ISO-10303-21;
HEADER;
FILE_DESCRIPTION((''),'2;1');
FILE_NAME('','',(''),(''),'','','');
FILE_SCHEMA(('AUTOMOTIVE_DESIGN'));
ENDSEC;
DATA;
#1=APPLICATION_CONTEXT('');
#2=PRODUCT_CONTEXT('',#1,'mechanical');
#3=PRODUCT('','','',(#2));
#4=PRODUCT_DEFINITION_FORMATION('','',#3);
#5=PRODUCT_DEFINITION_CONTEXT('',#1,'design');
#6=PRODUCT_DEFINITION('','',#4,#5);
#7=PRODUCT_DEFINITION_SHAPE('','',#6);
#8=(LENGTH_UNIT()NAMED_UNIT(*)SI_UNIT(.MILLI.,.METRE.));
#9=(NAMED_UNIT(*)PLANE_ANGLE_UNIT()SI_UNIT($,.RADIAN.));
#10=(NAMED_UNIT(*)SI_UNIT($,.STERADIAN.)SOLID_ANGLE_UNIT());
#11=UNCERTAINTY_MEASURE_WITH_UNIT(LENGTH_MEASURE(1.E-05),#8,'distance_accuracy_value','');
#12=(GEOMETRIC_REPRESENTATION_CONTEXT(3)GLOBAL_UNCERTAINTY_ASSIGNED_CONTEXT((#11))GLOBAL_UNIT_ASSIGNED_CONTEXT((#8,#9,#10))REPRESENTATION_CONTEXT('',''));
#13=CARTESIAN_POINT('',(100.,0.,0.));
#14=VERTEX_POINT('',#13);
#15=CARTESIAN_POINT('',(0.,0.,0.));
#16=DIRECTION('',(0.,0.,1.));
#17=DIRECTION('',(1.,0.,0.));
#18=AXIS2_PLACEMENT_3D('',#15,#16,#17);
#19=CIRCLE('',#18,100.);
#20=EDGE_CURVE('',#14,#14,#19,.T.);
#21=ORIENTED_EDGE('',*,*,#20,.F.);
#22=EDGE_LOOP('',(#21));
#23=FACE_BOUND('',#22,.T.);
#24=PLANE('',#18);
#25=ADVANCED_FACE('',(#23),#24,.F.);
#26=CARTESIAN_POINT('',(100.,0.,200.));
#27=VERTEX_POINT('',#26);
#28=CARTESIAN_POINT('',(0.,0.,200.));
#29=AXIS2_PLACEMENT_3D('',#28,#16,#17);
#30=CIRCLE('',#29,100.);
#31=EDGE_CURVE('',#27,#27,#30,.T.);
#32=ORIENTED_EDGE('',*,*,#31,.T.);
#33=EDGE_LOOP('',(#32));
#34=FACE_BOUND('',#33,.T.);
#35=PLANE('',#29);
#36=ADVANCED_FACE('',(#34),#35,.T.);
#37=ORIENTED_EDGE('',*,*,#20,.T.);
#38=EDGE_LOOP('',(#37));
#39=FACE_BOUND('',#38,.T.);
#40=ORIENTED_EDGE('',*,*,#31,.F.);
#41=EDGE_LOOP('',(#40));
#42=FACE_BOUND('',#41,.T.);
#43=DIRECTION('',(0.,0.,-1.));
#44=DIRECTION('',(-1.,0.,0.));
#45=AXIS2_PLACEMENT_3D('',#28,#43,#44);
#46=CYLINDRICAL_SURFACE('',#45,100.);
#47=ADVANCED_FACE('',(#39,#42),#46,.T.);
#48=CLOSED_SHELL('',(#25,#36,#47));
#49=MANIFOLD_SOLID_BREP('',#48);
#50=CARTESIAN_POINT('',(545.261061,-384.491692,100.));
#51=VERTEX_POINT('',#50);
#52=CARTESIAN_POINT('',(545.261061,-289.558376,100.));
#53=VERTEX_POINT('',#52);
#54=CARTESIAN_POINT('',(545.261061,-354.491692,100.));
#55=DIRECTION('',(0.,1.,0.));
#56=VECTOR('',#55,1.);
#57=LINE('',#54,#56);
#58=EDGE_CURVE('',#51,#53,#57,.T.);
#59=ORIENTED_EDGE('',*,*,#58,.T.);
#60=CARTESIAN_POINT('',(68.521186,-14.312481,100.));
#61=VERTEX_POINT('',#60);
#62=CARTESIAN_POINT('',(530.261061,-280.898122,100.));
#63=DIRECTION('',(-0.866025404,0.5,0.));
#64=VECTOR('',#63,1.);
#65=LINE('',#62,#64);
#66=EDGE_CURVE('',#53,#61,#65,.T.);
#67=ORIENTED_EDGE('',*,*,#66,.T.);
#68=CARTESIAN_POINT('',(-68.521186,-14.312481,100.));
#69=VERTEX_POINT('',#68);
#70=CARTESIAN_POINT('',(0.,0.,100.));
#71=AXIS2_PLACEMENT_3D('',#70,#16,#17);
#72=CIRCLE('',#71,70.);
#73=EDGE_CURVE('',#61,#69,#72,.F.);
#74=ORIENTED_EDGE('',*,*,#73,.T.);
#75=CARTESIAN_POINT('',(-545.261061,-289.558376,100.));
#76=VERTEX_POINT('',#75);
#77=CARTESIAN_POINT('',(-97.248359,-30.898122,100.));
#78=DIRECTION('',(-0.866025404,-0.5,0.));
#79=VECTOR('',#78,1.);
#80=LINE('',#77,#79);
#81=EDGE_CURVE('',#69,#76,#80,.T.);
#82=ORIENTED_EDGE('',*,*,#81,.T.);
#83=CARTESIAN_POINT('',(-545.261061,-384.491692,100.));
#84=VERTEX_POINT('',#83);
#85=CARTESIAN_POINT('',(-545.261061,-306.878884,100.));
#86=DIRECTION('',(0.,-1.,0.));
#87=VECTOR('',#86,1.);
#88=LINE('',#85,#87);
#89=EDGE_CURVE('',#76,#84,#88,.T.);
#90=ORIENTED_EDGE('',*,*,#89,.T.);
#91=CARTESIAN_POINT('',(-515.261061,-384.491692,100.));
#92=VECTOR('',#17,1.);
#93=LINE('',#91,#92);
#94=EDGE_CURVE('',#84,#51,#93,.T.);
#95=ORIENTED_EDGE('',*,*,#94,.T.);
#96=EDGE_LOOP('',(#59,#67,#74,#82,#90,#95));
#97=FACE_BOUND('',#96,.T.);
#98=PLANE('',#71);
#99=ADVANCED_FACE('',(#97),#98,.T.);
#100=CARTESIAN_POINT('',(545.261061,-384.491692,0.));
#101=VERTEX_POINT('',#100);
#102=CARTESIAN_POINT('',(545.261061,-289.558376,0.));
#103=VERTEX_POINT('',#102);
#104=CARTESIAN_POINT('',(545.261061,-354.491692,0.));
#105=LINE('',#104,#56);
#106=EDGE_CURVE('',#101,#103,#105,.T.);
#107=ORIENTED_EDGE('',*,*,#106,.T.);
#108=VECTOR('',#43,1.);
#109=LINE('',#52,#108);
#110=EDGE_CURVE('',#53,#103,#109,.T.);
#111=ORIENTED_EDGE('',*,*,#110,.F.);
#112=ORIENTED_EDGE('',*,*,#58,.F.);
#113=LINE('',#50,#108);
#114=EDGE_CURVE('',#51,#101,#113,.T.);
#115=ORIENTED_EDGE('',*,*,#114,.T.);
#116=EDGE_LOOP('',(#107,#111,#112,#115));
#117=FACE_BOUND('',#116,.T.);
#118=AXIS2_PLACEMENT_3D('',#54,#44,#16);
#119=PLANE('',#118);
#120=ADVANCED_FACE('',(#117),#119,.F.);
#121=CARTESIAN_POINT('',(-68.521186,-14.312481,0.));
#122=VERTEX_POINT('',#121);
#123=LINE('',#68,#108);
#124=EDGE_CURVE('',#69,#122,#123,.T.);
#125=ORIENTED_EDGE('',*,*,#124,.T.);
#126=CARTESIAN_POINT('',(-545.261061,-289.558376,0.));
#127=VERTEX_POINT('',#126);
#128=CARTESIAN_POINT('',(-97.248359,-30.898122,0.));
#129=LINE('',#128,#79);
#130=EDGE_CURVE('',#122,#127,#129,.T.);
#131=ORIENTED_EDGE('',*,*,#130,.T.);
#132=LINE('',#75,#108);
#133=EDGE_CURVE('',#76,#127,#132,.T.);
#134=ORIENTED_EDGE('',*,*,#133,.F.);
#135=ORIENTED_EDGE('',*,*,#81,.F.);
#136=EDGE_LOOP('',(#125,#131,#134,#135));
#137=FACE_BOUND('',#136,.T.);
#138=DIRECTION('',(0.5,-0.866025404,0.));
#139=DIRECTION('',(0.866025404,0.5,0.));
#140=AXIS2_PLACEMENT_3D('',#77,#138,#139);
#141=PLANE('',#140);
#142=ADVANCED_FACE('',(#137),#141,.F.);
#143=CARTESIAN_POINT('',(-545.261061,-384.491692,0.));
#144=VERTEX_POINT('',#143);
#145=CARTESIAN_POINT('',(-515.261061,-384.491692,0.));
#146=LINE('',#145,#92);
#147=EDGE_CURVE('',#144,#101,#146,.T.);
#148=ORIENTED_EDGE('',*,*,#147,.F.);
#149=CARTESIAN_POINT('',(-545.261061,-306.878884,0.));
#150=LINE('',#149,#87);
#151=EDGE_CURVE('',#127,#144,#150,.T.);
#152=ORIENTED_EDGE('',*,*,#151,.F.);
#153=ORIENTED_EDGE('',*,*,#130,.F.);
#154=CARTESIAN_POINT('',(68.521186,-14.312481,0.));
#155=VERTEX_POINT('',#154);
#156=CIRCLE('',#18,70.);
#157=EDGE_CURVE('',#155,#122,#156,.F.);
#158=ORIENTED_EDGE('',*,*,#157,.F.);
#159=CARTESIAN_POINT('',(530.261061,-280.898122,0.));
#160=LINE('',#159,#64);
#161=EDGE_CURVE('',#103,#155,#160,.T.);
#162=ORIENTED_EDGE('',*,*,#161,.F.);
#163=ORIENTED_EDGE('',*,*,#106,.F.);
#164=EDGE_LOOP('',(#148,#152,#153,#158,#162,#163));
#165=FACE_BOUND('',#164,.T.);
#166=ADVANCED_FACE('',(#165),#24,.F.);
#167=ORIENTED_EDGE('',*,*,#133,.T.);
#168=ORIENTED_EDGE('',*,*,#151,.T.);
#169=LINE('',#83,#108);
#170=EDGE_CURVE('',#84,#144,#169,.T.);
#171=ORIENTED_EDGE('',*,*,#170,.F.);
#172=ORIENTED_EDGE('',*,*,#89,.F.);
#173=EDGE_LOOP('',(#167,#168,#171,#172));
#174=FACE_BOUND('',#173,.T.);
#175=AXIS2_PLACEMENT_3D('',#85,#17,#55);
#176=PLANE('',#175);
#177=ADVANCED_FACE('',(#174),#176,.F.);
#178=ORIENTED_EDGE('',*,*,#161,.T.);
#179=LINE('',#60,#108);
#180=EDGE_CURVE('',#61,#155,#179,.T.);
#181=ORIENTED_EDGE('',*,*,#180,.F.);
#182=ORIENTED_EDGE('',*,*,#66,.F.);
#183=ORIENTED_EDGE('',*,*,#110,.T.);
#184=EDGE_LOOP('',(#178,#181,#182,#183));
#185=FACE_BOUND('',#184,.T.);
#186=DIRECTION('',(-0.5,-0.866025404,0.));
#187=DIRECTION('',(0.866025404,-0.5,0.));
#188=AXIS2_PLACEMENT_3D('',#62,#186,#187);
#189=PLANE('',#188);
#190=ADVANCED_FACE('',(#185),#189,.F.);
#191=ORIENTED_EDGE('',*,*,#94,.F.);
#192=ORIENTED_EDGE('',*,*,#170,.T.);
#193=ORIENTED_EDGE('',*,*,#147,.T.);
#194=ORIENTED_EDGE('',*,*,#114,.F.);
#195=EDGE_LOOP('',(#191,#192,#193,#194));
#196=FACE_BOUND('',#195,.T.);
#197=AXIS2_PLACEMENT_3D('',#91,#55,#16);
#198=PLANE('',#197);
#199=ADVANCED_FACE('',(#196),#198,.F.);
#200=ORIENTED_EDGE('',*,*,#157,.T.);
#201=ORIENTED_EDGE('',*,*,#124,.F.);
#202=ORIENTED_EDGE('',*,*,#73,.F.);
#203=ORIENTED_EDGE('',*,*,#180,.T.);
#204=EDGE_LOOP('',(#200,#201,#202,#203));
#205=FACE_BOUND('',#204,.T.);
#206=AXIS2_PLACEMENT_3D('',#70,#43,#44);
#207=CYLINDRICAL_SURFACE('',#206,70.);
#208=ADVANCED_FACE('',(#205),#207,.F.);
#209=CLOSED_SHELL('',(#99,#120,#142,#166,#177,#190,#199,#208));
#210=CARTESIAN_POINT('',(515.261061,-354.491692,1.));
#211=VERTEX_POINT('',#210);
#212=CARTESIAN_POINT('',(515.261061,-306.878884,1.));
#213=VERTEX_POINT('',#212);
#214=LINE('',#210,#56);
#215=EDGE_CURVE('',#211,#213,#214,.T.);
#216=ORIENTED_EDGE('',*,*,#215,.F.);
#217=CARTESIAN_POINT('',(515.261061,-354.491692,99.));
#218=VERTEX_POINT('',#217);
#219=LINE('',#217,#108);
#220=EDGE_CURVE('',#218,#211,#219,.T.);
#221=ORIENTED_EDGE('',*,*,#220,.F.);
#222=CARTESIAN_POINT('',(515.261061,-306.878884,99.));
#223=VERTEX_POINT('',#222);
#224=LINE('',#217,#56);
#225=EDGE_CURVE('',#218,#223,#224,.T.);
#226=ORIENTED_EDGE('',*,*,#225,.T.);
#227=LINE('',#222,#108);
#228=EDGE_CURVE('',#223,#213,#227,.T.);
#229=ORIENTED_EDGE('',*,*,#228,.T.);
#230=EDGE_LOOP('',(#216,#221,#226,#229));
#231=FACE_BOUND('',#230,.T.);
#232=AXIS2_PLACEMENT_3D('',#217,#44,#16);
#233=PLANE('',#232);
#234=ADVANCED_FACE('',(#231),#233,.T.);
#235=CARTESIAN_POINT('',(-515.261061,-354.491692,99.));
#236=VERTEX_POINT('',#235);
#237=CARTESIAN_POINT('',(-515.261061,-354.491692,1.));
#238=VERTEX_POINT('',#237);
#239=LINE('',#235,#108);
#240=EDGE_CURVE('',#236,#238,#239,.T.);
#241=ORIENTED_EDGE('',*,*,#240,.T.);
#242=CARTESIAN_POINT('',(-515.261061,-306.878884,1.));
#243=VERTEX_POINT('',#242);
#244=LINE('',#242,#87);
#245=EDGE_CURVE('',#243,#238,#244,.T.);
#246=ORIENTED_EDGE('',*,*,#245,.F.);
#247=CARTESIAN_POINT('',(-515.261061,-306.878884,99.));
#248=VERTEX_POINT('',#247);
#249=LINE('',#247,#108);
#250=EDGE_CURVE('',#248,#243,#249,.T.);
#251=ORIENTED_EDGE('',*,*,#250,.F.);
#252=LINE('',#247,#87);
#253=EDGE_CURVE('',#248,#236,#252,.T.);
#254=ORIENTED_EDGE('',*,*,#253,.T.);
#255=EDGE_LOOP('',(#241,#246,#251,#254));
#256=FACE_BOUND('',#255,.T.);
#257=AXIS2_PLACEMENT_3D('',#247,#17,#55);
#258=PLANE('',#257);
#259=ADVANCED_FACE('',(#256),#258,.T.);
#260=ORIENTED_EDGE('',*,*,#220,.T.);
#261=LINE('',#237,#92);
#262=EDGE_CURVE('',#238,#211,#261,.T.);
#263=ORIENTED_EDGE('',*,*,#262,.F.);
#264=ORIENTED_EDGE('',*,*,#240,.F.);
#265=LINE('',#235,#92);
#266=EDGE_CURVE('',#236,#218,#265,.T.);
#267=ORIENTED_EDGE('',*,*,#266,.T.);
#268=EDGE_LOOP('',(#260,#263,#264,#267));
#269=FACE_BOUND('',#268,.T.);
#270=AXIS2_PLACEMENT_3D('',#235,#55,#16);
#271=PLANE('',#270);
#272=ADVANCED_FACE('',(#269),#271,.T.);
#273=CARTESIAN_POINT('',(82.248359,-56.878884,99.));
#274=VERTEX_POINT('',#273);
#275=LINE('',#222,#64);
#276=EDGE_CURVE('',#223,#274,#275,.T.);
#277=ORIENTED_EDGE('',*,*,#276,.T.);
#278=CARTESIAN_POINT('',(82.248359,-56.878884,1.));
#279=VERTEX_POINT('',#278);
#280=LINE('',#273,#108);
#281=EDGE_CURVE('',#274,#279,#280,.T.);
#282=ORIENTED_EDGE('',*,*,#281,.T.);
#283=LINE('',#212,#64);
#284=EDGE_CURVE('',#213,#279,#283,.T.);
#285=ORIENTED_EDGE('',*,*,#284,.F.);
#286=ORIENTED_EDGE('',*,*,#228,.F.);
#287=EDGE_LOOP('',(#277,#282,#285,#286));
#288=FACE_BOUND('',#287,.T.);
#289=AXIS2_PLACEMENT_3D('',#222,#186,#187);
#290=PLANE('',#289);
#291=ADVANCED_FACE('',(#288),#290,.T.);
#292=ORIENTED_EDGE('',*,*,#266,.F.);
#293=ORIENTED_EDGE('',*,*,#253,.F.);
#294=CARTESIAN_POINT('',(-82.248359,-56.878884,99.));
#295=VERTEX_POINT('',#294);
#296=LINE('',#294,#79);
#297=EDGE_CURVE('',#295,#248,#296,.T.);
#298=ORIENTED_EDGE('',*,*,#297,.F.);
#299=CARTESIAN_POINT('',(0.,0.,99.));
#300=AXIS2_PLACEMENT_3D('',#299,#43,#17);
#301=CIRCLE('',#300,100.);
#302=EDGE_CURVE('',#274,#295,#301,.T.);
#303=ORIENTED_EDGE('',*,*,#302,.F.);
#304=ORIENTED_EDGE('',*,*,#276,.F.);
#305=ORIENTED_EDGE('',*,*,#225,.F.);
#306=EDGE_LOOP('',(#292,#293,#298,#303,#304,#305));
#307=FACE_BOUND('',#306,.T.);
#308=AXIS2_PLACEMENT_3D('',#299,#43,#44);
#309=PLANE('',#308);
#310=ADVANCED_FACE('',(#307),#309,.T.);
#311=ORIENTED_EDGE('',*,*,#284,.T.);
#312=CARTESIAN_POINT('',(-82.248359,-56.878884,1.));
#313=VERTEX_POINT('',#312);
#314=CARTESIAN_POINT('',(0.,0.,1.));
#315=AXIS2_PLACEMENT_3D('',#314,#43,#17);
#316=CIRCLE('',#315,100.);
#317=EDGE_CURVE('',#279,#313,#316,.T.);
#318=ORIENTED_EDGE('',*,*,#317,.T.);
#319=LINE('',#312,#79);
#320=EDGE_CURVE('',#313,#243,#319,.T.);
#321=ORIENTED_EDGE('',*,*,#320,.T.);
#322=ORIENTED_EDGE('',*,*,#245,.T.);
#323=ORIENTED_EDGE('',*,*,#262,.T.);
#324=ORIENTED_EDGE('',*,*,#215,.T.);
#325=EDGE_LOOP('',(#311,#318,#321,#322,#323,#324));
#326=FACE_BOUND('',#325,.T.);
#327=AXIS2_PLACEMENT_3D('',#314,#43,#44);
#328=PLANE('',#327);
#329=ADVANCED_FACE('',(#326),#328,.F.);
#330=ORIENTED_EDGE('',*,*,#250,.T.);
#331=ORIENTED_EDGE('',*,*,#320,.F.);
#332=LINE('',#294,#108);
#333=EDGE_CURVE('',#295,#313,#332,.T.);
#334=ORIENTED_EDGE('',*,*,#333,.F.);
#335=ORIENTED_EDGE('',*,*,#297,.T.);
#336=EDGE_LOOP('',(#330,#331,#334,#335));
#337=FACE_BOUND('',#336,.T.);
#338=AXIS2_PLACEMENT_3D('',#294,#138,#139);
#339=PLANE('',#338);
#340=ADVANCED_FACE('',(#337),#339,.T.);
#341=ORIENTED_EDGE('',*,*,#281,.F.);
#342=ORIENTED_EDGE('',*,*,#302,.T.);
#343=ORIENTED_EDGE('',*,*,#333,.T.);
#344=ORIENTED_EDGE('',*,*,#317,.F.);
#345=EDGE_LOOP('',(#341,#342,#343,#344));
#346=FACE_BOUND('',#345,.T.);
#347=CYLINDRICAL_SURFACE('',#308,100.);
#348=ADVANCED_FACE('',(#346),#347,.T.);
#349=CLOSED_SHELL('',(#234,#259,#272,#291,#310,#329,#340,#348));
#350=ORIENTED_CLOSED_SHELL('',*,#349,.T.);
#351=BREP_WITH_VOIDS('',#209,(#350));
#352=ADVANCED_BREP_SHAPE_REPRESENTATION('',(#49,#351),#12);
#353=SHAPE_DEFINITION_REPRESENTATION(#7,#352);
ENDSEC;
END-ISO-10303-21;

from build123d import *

# Parameters (mm, degrees)
SKETCH1_R             = 100
BOSS_EXTRUDE1_DEPTH   = 200
EXTRUDE_THIN1_DEPTH   = 100
EXTRUDE_THIN1_2_DEPTH = 1
EXTRUDE_THIN1_START   = 99
EXTRUDE_THIN1_3_DEPTH = 1


# Read off the part's stored shape, not the designer's step: Extrude-Thin1
with BuildPart() as part:
    # Sketch1 → Boss-Extrude1 (new body)
    with BuildSketch(Plane.XY):
        Circle(SKETCH1_R)
    extrude(amount=BOSS_EXTRUDE1_DEPTH)


with BuildPart() as body_2:
    # Extrude-Thin1 outline → Extrude-Thin1 (new body)
    with BuildSketch(Plane.XY):
        with BuildLine():
            Line((545.26106063, -289.558376275), (68.521185658, -14.312481126))
            ThreePointArc((68.521185658, -14.312481126), (0, -70), (-68.521185658, -14.312481126))
            Line((-68.521185658, -14.312481126), (-545.26106063, -289.558376275))
            Line((-545.26106063, -289.558376275), (-545.26106063, -384.491692362))
            Line((-545.26106063, -384.491692362), (545.26106063, -384.491692362))
            Line((545.26106063, -384.491692362), (545.26106063, -289.558376275))
        make_face()
        with BuildLine():
            ThreePointArc((-82.248358738, -56.87888435), (0, -100), (82.248358738, -56.87888435))
            Line((82.248358738, -56.87888435), (515.26106063, -306.87888435))
            Line((515.26106063, -306.87888435), (515.26106063, -354.491692362))
            Line((515.26106063, -354.491692362), (-515.26106063, -354.491692362))
            Line((-515.26106063, -354.491692362), (-515.26106063, -306.87888435))
            Line((-515.26106063, -306.87888435), (-82.248358738, -56.87888435))
        make_face(mode=Mode.SUBTRACT)
    extrude(amount=EXTRUDE_THIN1_DEPTH)

    # Extrude-Thin1 2 outline → Extrude-Thin1 2 (add)
    with BuildSketch(Plane.XY):
        with BuildLine():
            Line((515.26106063, -306.87888435), (82.248358738, -56.87888435))
            ThreePointArc((82.248358738, -56.87888435), (0, -100), (-82.248358738, -56.87888435))
            Line((-82.248358738, -56.87888435), (-515.26106063, -306.87888435))
            Line((-515.26106063, -306.87888435), (-515.26106063, -354.491692362))
            Line((-515.26106063, -354.491692362), (515.26106063, -354.491692362))
            Line((515.26106063, -354.491692362), (515.26106063, -306.87888435))
        make_face()
    extrude(amount=EXTRUDE_THIN1_2_DEPTH)

    # Extrude-Thin1 3 outline → Extrude-Thin1 3 (add)
    with BuildSketch(Plane.XY.offset(EXTRUDE_THIN1_START)):
        with BuildLine():
            Line((515.26106063, -306.87888435), (82.248358738, -56.87888435))
            ThreePointArc((82.248358738, -56.87888435), (0, -100), (-82.248358738, -56.87888435))
            Line((-82.248358738, -56.87888435), (-515.26106063, -306.87888435))
            Line((-515.26106063, -306.87888435), (-515.26106063, -354.491692362))
            Line((-515.26106063, -354.491692362), (515.26106063, -354.491692362))
            Line((515.26106063, -354.491692362), (515.26106063, -306.87888435))
        make_face()
    extrude(amount=EXTRUDE_THIN1_3_DEPTH)


solid = Compound([part.part, body_2.part])
